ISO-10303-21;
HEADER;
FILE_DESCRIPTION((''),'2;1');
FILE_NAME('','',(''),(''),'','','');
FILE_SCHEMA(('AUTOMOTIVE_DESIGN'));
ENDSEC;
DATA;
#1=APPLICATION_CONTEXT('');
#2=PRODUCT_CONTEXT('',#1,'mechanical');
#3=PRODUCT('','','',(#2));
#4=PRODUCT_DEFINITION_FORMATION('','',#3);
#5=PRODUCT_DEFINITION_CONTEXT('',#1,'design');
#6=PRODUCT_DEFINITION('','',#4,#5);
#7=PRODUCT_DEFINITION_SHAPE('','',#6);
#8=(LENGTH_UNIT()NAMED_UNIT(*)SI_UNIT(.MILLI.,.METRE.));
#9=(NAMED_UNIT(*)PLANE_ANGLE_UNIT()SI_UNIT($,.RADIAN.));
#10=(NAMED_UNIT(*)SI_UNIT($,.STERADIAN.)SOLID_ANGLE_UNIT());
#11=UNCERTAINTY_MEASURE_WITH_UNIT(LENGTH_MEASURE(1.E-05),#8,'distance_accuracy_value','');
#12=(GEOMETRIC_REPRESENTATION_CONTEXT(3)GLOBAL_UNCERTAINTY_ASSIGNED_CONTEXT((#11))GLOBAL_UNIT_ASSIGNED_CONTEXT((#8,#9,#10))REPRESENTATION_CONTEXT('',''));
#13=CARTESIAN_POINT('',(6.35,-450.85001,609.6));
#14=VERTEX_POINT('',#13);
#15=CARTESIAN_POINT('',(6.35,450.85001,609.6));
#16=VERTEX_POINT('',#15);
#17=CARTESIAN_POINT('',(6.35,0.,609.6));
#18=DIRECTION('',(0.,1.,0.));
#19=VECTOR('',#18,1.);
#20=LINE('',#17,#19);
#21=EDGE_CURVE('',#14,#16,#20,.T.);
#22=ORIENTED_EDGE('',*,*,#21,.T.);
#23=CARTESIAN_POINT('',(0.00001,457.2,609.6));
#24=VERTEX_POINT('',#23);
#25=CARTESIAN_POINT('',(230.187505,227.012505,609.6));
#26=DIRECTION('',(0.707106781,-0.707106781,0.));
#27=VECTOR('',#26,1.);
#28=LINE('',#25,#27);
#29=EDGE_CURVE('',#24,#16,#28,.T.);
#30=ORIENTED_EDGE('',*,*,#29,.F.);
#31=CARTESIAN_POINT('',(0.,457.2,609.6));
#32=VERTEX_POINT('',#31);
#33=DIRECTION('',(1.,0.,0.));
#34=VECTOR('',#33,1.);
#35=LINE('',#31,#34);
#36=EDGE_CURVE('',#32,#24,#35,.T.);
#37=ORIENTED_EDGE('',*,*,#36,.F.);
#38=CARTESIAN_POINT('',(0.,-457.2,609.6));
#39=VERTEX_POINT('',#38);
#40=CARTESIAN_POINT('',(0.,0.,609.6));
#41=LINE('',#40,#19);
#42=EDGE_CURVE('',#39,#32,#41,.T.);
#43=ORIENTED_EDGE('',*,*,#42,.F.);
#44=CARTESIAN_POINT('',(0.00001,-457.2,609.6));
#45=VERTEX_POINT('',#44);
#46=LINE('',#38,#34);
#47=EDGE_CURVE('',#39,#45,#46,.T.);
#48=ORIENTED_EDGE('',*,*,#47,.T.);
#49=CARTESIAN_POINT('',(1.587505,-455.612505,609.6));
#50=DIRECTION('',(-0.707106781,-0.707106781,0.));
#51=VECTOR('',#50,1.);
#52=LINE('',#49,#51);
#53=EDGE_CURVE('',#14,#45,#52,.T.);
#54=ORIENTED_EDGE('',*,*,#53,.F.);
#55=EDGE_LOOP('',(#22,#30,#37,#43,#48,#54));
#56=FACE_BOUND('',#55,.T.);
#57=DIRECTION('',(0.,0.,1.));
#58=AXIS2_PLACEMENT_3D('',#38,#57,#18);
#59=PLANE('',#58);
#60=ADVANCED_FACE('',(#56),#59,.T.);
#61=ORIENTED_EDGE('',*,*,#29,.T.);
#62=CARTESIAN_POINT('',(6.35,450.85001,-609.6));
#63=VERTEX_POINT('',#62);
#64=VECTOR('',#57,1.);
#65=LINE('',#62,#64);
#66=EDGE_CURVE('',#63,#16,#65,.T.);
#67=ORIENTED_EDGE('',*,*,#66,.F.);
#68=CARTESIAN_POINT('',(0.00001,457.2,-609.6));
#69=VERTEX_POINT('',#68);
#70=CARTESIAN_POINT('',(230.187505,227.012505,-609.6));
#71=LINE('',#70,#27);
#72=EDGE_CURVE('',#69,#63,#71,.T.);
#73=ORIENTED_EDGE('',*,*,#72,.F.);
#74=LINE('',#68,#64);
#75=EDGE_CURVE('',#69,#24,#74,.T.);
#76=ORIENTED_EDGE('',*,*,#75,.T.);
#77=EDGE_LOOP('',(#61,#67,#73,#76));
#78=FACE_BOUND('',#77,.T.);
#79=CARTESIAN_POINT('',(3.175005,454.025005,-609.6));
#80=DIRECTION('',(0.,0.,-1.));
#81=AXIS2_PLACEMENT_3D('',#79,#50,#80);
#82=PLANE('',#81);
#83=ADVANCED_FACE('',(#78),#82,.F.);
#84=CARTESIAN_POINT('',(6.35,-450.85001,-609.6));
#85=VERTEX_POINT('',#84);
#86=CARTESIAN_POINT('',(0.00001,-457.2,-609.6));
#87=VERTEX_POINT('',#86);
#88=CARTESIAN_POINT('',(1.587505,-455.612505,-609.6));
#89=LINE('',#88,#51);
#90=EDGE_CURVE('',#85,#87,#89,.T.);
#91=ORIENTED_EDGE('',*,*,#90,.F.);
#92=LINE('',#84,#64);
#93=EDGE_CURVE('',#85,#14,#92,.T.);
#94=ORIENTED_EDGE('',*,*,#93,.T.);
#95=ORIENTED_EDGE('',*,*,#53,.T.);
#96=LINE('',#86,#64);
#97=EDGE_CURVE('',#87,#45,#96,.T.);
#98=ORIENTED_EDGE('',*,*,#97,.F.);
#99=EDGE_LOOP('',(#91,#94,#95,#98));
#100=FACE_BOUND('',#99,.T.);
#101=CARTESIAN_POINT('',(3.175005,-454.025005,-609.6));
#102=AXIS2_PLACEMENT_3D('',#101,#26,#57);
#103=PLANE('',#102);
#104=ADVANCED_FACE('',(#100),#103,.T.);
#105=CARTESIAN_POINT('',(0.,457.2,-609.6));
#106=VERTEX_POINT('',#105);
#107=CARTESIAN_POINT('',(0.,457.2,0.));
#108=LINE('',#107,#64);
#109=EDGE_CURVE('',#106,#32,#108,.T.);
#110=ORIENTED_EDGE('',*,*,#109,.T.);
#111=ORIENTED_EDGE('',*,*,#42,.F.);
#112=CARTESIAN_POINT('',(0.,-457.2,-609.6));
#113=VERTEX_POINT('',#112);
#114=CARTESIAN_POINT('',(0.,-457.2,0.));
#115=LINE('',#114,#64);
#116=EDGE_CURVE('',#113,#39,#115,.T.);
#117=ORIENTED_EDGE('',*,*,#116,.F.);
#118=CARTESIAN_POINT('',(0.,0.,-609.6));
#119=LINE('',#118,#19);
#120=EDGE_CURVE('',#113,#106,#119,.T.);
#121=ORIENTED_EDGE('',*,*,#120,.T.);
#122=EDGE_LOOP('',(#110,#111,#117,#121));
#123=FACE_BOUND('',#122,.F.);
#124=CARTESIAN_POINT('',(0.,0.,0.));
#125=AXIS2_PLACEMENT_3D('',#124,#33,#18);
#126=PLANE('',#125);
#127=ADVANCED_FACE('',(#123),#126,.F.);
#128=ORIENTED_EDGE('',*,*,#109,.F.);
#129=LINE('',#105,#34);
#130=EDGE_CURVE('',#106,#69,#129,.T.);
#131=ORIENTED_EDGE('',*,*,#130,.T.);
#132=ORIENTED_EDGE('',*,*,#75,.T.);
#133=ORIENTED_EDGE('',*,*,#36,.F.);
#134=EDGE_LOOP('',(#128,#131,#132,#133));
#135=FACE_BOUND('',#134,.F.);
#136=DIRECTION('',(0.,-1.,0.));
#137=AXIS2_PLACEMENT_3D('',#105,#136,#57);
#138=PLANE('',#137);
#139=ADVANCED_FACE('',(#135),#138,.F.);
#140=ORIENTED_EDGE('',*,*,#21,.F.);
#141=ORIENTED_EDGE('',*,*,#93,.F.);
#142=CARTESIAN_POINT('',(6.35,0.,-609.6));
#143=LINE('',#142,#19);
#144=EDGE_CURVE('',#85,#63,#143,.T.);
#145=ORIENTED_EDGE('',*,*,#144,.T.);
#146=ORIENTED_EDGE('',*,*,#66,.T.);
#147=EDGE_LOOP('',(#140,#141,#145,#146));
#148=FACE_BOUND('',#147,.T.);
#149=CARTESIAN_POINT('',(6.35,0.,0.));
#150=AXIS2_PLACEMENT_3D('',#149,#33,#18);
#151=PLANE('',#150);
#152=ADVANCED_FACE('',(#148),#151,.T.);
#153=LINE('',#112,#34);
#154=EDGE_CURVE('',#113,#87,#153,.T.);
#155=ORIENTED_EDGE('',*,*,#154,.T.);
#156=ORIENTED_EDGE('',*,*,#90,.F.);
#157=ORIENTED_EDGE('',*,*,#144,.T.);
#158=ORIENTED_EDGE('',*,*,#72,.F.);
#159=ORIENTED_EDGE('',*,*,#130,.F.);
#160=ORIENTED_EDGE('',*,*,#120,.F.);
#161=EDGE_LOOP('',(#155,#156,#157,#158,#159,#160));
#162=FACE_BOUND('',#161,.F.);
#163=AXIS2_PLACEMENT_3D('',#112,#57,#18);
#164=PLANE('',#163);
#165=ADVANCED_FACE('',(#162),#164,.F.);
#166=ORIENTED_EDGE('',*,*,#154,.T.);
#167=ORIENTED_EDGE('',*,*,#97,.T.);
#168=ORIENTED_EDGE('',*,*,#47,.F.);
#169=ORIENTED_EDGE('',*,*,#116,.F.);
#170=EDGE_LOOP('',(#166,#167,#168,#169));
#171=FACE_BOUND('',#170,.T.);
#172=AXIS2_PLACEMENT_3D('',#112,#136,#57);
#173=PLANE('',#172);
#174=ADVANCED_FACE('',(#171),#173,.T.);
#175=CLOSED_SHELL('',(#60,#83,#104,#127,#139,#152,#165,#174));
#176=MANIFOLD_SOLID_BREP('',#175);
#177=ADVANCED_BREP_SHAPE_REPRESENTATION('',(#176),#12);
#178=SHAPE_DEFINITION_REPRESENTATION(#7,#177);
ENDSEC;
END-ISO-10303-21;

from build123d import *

# Parameters (mm, degrees)
F0_W     = 914.4
F0_H     = 1219.2
F1_DEPTH = 6.35
F2_SIZE  = 6.34999
F3_SIZE  = 6.34999


# Not quite as in the source:
# - a fillet or chamfer is up to 0.001 mm smaller than in the source, because OpenCascade refuses the exact size


with BuildPart() as f1:
    # F0 (on Right) → F1 (new body)
    with BuildSketch(Plane.YZ):
        Rectangle(F0_W, F0_H)
    extrude(amount=F1_DEPTH)

    # F2 (size 6.35 in the source; OpenCascade refuses exactly that, so slightly less here)
    f2_edges = [f1.edges().sort_by_distance(p)[0] for p in [
        (6.35, 457.2, 0),
    ]]
    chamfer(f2_edges, length=F2_SIZE)

    # F3 (size 6.35 in the source; OpenCascade refuses exactly that, so slightly less here)
    f3_edges = [f1.edges().sort_by_distance(p)[0] for p in [
        (6.35, -457.2, 0),
    ]]
    chamfer(f3_edges, length=F3_SIZE)


solid = f1.part
